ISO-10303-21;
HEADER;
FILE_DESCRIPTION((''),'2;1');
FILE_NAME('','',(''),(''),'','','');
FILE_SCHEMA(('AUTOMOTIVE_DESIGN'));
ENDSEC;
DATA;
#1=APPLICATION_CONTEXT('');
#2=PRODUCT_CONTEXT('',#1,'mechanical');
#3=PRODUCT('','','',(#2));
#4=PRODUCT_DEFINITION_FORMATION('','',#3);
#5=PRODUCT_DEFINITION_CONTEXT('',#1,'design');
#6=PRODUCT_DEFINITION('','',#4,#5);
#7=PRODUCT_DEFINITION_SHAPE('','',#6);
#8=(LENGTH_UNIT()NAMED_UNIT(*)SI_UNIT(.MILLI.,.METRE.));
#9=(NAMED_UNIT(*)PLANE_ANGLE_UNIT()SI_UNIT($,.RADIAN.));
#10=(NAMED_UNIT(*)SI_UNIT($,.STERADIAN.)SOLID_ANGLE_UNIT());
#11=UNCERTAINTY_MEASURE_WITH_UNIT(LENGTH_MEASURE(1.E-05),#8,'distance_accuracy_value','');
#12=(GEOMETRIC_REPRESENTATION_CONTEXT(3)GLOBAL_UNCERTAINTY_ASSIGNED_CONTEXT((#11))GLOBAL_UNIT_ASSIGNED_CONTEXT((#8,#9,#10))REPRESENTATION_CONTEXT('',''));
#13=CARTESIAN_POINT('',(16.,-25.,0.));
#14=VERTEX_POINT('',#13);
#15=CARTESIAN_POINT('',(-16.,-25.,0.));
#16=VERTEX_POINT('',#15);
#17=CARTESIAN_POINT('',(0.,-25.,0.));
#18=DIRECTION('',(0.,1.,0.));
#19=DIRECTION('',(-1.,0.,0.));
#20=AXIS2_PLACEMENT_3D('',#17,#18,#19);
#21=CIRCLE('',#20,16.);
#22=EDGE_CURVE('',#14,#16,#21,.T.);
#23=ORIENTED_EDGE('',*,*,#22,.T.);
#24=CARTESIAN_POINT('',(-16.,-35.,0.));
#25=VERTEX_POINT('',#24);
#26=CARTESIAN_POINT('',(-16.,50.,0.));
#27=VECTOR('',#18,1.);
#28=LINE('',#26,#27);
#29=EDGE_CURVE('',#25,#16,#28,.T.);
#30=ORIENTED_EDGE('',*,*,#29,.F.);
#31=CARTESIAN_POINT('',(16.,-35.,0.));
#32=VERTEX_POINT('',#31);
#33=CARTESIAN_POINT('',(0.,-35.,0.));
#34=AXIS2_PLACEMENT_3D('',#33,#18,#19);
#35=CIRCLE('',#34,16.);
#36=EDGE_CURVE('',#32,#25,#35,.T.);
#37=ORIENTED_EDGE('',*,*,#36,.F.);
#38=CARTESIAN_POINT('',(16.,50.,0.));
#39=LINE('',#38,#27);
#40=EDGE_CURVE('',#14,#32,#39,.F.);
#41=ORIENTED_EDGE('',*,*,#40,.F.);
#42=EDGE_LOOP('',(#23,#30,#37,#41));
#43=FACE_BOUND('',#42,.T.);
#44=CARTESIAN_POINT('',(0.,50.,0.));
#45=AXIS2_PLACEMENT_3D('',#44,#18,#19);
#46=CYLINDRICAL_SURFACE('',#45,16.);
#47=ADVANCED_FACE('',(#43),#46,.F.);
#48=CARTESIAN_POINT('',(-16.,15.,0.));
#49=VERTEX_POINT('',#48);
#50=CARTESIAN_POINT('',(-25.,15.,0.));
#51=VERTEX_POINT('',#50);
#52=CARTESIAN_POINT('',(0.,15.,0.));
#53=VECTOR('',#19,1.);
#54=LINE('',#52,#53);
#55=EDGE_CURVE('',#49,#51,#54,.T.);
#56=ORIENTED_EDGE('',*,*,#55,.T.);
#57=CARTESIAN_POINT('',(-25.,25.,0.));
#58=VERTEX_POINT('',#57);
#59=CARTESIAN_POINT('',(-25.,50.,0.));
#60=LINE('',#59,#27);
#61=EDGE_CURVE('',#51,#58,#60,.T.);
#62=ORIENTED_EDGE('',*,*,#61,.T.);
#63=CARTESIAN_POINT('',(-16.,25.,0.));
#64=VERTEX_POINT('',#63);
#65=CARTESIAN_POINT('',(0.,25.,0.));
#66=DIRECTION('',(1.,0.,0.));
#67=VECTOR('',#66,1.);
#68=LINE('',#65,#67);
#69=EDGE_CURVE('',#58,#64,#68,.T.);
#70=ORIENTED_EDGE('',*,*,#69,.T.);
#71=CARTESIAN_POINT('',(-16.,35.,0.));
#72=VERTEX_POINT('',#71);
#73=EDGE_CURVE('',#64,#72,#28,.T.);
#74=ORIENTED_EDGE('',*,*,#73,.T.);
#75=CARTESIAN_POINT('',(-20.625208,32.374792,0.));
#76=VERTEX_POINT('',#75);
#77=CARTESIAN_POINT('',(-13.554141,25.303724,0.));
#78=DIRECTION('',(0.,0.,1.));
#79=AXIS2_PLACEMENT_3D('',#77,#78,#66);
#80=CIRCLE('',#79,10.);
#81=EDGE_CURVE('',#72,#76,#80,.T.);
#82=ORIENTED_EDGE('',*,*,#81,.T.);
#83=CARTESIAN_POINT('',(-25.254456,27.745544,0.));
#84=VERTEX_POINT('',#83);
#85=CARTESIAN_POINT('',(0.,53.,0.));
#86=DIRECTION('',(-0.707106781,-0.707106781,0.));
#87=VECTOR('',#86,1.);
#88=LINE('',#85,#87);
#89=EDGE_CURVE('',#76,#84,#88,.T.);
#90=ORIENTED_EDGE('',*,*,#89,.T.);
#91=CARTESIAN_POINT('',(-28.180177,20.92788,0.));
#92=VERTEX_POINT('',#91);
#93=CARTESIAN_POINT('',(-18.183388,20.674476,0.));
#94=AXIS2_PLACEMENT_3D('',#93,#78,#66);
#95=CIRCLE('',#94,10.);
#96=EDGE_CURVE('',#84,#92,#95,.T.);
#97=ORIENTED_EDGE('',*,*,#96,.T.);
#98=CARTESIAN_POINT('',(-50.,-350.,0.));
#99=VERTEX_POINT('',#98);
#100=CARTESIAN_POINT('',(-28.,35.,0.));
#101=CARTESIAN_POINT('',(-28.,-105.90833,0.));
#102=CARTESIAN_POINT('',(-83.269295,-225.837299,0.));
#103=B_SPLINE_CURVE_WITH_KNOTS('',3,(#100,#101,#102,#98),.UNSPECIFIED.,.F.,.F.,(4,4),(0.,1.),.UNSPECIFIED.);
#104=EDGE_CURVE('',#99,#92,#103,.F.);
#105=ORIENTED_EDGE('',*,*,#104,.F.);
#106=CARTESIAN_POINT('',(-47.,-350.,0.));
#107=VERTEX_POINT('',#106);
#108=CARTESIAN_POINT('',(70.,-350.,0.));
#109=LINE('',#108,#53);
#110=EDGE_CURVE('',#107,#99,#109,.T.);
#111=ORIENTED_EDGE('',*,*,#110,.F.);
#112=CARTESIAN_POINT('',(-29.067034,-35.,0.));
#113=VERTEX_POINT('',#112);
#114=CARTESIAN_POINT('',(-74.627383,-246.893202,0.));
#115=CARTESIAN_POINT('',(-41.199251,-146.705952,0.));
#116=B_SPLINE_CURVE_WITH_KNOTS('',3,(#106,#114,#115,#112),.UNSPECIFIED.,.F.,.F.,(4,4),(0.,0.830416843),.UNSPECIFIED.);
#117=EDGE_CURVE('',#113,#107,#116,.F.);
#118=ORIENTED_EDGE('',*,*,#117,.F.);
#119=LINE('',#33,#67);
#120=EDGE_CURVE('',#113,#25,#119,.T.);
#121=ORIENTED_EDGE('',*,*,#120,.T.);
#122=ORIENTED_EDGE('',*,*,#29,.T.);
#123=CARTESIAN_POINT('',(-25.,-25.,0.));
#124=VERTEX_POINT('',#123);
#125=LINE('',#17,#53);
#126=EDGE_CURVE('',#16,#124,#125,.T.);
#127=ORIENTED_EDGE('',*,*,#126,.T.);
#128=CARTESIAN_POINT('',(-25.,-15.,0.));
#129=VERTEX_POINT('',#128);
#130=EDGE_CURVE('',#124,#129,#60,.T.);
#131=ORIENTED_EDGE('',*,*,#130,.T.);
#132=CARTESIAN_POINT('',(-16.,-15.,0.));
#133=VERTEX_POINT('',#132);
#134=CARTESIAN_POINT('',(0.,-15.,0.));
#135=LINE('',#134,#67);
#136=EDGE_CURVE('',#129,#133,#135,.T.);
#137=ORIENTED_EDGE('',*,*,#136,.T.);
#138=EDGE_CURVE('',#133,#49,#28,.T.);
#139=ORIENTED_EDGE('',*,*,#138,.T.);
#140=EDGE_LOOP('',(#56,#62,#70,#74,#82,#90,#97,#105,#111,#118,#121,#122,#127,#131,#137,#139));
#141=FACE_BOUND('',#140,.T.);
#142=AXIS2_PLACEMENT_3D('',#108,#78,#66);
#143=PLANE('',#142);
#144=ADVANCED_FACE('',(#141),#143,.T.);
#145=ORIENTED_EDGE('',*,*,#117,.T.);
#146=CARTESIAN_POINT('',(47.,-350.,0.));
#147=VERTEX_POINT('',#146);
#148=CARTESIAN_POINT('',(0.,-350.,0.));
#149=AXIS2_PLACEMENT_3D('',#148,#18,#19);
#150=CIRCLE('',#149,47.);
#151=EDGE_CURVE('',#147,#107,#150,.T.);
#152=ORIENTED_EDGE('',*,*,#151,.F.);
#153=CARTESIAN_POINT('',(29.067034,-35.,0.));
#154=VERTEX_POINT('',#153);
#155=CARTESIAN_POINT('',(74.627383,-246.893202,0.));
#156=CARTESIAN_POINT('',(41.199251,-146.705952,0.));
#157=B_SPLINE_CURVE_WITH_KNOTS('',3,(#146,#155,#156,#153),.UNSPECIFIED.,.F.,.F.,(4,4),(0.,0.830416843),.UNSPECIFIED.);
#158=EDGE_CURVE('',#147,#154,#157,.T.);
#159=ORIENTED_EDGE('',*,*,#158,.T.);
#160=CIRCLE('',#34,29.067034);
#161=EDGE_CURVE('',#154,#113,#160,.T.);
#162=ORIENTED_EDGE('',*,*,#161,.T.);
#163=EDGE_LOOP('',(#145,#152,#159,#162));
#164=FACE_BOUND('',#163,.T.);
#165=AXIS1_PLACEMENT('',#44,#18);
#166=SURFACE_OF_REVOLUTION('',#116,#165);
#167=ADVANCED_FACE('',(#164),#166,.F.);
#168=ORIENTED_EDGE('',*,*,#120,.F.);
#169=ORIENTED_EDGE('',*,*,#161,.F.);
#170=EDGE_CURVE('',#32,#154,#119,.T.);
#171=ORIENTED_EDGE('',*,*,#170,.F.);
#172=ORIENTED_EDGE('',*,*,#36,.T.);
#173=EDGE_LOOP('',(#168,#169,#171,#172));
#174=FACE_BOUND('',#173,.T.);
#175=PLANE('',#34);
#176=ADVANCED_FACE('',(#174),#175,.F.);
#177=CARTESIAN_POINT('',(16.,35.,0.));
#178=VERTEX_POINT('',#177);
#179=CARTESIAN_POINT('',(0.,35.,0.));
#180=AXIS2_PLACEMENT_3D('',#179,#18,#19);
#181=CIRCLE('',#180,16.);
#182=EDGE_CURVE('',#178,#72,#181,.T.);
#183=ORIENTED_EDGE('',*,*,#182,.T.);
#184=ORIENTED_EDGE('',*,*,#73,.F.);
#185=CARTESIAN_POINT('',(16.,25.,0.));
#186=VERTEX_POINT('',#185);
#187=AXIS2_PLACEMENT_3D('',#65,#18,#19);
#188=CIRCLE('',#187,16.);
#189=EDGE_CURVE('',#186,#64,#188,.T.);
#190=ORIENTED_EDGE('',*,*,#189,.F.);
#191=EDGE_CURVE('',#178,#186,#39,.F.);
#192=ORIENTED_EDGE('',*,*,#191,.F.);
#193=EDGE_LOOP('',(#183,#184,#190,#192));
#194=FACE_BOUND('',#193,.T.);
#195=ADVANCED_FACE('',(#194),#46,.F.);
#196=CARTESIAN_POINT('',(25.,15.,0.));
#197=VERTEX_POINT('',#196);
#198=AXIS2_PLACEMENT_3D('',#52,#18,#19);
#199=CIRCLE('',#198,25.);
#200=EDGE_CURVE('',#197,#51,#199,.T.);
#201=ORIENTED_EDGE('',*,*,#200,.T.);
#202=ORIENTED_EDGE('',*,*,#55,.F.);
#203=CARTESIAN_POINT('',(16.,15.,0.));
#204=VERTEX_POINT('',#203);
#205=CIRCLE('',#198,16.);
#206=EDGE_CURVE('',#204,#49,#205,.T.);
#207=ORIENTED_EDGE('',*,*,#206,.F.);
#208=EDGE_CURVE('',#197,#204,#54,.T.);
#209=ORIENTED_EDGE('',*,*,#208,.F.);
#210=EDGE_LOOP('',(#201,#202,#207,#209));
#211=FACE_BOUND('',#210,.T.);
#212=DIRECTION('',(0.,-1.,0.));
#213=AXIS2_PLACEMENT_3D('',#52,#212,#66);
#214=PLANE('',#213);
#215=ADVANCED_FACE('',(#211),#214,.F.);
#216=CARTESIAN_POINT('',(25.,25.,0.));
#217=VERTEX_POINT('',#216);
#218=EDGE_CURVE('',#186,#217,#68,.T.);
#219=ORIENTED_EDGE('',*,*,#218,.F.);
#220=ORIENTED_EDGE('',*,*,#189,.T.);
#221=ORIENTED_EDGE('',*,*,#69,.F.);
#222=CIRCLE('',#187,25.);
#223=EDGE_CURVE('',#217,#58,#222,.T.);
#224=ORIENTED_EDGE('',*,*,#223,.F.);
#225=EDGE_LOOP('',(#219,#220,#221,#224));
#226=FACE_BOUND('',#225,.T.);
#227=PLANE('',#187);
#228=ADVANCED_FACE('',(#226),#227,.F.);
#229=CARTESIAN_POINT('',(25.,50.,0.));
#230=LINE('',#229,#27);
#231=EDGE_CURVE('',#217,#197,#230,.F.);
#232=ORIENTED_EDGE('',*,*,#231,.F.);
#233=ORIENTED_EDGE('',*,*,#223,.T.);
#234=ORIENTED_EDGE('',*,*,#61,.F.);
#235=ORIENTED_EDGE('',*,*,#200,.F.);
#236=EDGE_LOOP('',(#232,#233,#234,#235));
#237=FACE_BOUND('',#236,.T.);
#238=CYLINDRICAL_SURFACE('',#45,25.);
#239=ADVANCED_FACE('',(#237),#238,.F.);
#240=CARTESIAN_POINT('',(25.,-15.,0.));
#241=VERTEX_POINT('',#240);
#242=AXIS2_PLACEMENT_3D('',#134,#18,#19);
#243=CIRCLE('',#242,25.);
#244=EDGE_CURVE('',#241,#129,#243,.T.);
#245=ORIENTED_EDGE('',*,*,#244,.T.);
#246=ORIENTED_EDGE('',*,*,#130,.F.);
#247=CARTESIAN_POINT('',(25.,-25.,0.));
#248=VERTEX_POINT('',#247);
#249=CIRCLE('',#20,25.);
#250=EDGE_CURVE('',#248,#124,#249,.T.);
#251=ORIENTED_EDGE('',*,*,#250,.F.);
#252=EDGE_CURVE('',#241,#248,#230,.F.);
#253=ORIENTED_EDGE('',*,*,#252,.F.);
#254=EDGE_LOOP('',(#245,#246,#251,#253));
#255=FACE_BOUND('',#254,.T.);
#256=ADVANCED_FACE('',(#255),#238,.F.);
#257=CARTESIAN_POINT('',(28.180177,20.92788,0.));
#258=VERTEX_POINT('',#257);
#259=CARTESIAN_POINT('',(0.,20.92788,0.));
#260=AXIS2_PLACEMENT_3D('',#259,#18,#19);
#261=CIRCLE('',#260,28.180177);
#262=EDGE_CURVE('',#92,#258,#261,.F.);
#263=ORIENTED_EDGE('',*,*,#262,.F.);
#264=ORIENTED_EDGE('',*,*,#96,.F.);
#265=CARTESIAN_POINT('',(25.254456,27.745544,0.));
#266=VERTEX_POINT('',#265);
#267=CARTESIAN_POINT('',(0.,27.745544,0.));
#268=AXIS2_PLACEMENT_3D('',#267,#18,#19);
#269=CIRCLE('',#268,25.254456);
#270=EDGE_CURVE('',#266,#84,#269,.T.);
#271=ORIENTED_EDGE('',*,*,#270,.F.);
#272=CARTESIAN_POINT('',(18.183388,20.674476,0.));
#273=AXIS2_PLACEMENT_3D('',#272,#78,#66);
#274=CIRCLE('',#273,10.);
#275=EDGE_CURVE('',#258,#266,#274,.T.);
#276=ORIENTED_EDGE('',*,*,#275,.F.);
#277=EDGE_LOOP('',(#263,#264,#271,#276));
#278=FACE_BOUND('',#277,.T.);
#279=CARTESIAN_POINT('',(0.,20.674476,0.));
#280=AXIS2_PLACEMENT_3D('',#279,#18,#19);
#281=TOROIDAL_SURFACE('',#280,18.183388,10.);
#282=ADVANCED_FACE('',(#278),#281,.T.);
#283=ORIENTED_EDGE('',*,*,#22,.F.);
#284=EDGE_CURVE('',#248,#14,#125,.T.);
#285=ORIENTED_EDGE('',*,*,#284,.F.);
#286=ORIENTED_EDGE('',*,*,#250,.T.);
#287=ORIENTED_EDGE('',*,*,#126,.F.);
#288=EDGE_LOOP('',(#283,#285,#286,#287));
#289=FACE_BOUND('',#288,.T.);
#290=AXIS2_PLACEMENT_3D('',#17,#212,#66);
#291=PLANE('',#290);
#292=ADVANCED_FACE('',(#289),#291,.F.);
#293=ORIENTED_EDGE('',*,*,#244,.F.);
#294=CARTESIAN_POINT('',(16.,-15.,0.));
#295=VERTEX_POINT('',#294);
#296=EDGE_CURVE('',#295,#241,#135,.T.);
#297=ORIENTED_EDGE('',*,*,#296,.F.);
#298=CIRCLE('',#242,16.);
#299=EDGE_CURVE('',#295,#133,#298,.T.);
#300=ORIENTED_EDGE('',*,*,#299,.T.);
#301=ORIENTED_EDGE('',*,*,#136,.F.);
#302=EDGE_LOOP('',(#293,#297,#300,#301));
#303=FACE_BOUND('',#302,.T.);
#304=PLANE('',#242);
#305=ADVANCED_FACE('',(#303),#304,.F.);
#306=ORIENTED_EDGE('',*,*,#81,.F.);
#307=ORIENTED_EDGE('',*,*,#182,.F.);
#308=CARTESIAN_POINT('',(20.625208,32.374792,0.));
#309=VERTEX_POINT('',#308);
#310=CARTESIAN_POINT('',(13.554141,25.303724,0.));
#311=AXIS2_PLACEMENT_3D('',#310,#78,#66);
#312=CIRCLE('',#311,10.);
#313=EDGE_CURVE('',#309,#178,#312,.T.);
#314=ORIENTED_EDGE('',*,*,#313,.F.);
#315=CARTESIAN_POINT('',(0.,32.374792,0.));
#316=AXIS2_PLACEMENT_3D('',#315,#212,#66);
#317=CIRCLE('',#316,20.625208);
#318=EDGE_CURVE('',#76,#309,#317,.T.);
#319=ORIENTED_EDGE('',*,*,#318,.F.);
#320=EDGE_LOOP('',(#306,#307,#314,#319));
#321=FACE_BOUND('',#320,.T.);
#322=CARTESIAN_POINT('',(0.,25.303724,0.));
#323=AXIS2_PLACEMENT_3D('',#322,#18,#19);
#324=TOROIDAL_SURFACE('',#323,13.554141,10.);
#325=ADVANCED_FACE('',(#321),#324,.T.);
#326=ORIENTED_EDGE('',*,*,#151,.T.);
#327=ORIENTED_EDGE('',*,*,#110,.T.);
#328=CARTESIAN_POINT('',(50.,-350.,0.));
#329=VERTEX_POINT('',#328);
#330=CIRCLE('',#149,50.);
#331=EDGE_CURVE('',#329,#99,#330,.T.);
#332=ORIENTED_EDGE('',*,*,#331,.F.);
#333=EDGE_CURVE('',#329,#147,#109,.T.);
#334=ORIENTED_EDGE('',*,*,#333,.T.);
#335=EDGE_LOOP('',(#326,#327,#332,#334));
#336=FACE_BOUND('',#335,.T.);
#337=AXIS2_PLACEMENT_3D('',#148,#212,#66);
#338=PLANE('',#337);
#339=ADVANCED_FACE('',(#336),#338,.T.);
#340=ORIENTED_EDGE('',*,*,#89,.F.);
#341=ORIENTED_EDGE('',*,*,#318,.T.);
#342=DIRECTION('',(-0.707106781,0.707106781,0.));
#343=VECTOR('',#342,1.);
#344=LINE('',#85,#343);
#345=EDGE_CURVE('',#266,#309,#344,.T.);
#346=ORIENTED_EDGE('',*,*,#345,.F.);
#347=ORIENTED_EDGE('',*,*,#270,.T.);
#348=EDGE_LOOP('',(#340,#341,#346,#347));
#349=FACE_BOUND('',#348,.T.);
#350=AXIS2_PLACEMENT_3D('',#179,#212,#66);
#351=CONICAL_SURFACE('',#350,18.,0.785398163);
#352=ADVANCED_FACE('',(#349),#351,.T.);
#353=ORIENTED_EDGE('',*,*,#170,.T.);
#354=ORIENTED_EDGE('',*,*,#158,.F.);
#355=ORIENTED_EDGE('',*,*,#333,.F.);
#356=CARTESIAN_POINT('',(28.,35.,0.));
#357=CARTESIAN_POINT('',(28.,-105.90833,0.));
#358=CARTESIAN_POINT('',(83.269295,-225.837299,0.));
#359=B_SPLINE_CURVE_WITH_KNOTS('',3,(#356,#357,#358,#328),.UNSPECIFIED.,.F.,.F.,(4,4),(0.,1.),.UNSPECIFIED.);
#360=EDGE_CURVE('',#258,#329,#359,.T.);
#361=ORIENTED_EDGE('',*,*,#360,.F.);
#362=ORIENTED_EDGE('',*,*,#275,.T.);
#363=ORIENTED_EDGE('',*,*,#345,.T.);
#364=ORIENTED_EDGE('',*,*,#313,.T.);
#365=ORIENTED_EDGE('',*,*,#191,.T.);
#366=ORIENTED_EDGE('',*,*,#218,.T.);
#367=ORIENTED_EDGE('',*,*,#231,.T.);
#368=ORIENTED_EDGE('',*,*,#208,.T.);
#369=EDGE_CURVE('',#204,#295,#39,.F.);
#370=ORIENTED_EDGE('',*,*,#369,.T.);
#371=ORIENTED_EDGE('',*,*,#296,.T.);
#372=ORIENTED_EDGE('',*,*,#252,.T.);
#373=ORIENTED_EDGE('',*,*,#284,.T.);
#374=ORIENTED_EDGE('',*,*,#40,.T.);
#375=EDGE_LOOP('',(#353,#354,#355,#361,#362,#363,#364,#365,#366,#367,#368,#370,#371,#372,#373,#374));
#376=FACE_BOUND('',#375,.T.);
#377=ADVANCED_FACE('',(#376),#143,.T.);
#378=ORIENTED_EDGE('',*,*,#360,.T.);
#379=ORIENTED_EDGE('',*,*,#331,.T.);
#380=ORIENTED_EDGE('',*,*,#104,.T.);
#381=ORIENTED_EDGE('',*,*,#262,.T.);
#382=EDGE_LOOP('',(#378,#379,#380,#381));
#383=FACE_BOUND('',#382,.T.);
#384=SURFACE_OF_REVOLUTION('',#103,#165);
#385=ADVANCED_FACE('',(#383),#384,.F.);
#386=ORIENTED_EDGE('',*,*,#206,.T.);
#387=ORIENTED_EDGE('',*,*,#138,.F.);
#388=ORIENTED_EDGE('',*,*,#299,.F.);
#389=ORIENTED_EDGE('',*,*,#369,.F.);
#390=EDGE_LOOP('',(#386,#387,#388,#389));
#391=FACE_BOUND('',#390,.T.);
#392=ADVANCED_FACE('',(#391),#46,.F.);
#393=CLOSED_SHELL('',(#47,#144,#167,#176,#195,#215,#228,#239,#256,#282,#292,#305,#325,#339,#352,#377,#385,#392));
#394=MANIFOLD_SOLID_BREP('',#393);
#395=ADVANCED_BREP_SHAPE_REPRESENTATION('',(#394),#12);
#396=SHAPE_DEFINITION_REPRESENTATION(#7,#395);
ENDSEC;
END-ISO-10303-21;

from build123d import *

# Parameters (mm, degrees)
CORTAR_EXTRUIR1_DEPTH      = 70
CORTAR_EXTRUIR1_DEPTH_BACK = 70
CROQUIS2_W                 = 77.259476102
CROQUIS2_H                 = 391.167224263
CHAFL_N1_SIZE              = 10
REDONDEO1_R                = 10


with BuildPart() as part:
    # Croquis1 → Revolución1 (revolve)
    with BuildSketch(Plane.XY):
        with BuildLine():
            Line((-28, 35), (-16, 35))
            Line((-16, 35), (-16, 25))
            Line((-16, 25), (-25, 25))
            Line((-25, 25), (-25, 15))
            Line((-25, 15), (-16, 15))
            Line((-16, 15), (-16, -15))
            Line((-16, -15), (-25, -15))
            Line((-25, -15), (-25, -25))
            Line((-25, -25), (-16, -25))
            Line((-16, -25), (-16, -35))
            Line((-16, -35), (-29.067033725, -35))
            add(Edge.make_bspline(
                [(-47, -350), (-74.627383194, -246.893202238), (-41.199250834, -146.705952206), (-29.067033725, -35)],
                knots=[0, 0, 0, 0, 0.830416843, 0.830416843, 0.830416843, 0.830416843], degree=3))
            Line((-47, -350), (-50, -350))
            add(Edge.make_bspline(
                [(-28, 35), (-28, -105.90833009), (-83.269295344, -225.837299443), (-50, -350)],
                knots=[0, 0, 0, 0, 1, 1, 1, 1], degree=3))
        make_face()
    revolve(axis=Axis((0, 50, 0), (0, -1, 0)))

    # Croquis2 → Cortar-Extruir1 (cut, two sides: drawn at the far end of the back side and taken through both)
    with BuildSketch(Plane(origin=(0, 0, 0), x_dir=(0, 0, -1), z_dir=(1, 0, 0)).offset(-CORTAR_EXTRUIR1_DEPTH_BACK)):
        with Locations((-38.629738051, -154.416387869)):
            Rectangle(CROQUIS2_W, CROQUIS2_H)
    extrude(amount=CORTAR_EXTRUIR1_DEPTH + CORTAR_EXTRUIR1_DEPTH_BACK, mode=Mode.SUBTRACT)

    # Chaflán1
    # the kernel refuses this chamfer: 10 mm, written as the material it takes off along each edge
    with BuildSketch(Plane(origin=(0, 35, 0), x_dir=(-0.5990091787085334, 0, 0.8007421581401396), z_dir=(0.8007421581401396, 0, 0.5990091787085334))) as chafl_n1_piece_1:
        with BuildLine():
            Line((28 - CHAFL_N1_SIZE, 0), (28.093218581, 10.093218581))
            ThreePointArc((28.093218581, 10.093218581), (28.024813117, 5.189585851), (28, 0))
            Line((28, 0), (28 - CHAFL_N1_SIZE, 0))
        make_face()
    revolve(axis=Axis((0, 35, 0), (0, -1, 0)), revolution_arc=286.402063585, mode=Mode.SUBTRACT)

    # Redondeo1
    # the kernel refuses this fillet: 10 mm, written as the material it takes off along each edge
    with BuildSketch(Plane(origin=(0, 24.906781419, 0), x_dir=(-0.9366579963611824, 0, 0.35024533951596737), z_dir=(0.35024533951596737, 0, 0.9366579963611824))) as redondeo1_piece_1:
        with BuildLine():
            CenterArc((18.183388392, 4.232305435), REDONDEO1_R, 315, 43.547945444)
            Line((28.180177192, 3.978901233), (28.380112968, 3.973833149))
            ThreePointArc((28.380112968, 3.973833149), (28.333165909, 1.985155745), (28.293184954, -0.003667366))
            Line((28.293184954, -0.003667366), (28.234639937, -0.141421356))
            Line((28.234639937, -0.141421356), (25.39587756, -2.980183733))
            Line((25.39587756, -2.980183733), (25.254456204, -2.838762377))
        make_face()
    revolve(axis=Axis((0, 24.906781419, 0), (0, -1, 0)), revolution_arc=221.004643811, mode=Mode.SUBTRACT)
    with BuildSketch(Plane(origin=(0, 35, 0), x_dir=(-0.8695683162103452, 0, 0.4938126602701729), z_dir=(0.4938126602701729, 0, 0.8695683162103452))) as redondeo1_piece_2:
        with BuildLine():
            CenterArc((13.554140544, 9.696276168), REDONDEO1_R, 284.157365729, 30.842634271)
            Line((20.625208356, 2.625208356), (20.766629712, 2.483787))
            Line((20.766629712, 2.483787), (18.141421356, -0.141421356))
            Line((18.141421356, -0.141421356), (18, -0.2))
            ThreePointArc((18, -0.2), (17, -0.2), (16.048917189, -0.193925523))
            Line((16.048917189, -0.193925523), (16, 0))
        make_face()
    revolve(axis=Axis((0, 35, 0), (0, -1, 0)), revolution_arc=239.182972496, mode=Mode.SUBTRACT)


solid = part.part
